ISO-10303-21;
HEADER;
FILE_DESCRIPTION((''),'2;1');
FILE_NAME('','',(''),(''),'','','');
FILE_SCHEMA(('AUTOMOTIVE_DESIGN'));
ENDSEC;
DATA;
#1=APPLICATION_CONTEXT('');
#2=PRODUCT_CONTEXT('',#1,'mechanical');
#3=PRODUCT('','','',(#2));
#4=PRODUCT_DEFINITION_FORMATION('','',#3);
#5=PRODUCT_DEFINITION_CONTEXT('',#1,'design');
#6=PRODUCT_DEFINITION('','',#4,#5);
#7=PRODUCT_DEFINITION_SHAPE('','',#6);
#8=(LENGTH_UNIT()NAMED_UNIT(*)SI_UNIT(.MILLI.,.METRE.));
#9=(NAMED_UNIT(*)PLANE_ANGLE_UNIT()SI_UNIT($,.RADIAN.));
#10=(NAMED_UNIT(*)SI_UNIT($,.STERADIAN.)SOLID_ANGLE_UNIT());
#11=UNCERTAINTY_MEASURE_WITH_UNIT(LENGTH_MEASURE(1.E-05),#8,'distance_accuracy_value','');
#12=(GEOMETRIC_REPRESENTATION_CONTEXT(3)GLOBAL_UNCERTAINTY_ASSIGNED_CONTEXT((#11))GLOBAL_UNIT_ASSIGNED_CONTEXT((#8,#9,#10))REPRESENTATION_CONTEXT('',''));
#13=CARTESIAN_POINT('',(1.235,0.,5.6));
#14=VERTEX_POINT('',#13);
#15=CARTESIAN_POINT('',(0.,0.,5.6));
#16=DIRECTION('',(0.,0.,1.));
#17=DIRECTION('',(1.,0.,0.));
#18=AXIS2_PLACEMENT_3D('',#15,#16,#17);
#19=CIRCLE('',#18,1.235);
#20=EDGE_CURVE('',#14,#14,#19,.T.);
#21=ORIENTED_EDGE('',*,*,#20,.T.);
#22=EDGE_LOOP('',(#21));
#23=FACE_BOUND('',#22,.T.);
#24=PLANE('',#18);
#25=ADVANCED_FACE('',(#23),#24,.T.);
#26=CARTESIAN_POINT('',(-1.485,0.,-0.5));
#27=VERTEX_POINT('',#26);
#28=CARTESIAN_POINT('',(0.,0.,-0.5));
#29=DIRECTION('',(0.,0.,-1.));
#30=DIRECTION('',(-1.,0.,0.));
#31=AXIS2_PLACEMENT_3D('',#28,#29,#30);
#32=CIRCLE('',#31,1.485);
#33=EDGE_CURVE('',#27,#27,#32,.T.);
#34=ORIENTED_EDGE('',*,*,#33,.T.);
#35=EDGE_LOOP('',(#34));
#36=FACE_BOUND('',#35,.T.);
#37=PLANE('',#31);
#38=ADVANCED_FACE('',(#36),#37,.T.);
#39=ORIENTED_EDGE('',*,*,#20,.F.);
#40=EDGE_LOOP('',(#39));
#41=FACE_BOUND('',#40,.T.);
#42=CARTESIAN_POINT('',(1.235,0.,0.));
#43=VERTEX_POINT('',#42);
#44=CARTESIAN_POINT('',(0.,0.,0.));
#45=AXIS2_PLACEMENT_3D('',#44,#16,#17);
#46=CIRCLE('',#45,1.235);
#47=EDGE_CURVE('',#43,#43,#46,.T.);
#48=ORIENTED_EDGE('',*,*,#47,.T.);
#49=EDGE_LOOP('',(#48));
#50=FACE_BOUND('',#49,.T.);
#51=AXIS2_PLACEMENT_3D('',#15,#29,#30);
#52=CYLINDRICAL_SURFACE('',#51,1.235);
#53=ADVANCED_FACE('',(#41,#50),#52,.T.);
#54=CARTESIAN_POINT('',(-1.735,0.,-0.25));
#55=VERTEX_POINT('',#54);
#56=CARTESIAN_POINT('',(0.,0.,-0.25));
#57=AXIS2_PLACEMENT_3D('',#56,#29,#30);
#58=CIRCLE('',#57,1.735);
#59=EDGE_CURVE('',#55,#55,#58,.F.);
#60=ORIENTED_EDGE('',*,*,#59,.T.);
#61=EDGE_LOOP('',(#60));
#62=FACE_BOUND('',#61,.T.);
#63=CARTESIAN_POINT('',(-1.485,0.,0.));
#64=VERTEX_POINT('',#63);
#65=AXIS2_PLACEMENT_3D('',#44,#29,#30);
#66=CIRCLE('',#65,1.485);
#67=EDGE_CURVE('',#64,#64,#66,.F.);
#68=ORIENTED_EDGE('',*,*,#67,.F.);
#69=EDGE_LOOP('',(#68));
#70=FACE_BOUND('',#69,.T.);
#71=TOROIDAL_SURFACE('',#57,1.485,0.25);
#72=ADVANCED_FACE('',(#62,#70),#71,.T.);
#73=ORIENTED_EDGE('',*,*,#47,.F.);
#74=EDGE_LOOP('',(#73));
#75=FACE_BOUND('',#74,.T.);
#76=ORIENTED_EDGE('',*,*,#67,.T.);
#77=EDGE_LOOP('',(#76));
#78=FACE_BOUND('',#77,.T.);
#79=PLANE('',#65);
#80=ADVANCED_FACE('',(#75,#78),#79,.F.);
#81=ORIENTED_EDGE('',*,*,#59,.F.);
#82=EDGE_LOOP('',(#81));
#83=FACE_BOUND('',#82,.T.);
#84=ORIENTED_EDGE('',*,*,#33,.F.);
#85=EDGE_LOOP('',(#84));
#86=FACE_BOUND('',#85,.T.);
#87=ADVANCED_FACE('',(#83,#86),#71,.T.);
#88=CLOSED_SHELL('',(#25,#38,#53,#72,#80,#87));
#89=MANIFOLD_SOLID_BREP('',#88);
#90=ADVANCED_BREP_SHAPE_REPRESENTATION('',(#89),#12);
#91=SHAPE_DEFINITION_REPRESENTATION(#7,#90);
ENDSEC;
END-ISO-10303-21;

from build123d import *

# Parameters (mm, degrees)
SKETCH1_R           = 1.235
BOSS_EXTRUDE1_DEPTH = 5.6
SKETCH2_R           = 1.735
BOSS_EXTRUDE2_DEPTH = 0.5
FILLET1_R           = 0.25


with BuildPart() as part:
    # Sketch1 → Boss-Extrude1 (new body)
    with BuildSketch(Plane.XY):
        Circle(SKETCH1_R)
    extrude(amount=BOSS_EXTRUDE1_DEPTH)

    # Sketch2 → Boss-Extrude2 (add)
    with BuildSketch(Plane(origin=(0, 0, 0), x_dir=(-1, 0, 0), z_dir=(0, 0, -1))):
        Circle(SKETCH2_R)
    extrude(amount=BOSS_EXTRUDE2_DEPTH)

    # Fillet1
    fillet1_edges = [part.edges().sort_by_distance(p)[0] for p in [
        (1.735, 0, 0),
        (1.735, 0, -0.5),
    ]]
    fillet(fillet1_edges, radius=FILLET1_R - 0.0001)  # a hair under: the kernel refuses the full size


solid = part.part
